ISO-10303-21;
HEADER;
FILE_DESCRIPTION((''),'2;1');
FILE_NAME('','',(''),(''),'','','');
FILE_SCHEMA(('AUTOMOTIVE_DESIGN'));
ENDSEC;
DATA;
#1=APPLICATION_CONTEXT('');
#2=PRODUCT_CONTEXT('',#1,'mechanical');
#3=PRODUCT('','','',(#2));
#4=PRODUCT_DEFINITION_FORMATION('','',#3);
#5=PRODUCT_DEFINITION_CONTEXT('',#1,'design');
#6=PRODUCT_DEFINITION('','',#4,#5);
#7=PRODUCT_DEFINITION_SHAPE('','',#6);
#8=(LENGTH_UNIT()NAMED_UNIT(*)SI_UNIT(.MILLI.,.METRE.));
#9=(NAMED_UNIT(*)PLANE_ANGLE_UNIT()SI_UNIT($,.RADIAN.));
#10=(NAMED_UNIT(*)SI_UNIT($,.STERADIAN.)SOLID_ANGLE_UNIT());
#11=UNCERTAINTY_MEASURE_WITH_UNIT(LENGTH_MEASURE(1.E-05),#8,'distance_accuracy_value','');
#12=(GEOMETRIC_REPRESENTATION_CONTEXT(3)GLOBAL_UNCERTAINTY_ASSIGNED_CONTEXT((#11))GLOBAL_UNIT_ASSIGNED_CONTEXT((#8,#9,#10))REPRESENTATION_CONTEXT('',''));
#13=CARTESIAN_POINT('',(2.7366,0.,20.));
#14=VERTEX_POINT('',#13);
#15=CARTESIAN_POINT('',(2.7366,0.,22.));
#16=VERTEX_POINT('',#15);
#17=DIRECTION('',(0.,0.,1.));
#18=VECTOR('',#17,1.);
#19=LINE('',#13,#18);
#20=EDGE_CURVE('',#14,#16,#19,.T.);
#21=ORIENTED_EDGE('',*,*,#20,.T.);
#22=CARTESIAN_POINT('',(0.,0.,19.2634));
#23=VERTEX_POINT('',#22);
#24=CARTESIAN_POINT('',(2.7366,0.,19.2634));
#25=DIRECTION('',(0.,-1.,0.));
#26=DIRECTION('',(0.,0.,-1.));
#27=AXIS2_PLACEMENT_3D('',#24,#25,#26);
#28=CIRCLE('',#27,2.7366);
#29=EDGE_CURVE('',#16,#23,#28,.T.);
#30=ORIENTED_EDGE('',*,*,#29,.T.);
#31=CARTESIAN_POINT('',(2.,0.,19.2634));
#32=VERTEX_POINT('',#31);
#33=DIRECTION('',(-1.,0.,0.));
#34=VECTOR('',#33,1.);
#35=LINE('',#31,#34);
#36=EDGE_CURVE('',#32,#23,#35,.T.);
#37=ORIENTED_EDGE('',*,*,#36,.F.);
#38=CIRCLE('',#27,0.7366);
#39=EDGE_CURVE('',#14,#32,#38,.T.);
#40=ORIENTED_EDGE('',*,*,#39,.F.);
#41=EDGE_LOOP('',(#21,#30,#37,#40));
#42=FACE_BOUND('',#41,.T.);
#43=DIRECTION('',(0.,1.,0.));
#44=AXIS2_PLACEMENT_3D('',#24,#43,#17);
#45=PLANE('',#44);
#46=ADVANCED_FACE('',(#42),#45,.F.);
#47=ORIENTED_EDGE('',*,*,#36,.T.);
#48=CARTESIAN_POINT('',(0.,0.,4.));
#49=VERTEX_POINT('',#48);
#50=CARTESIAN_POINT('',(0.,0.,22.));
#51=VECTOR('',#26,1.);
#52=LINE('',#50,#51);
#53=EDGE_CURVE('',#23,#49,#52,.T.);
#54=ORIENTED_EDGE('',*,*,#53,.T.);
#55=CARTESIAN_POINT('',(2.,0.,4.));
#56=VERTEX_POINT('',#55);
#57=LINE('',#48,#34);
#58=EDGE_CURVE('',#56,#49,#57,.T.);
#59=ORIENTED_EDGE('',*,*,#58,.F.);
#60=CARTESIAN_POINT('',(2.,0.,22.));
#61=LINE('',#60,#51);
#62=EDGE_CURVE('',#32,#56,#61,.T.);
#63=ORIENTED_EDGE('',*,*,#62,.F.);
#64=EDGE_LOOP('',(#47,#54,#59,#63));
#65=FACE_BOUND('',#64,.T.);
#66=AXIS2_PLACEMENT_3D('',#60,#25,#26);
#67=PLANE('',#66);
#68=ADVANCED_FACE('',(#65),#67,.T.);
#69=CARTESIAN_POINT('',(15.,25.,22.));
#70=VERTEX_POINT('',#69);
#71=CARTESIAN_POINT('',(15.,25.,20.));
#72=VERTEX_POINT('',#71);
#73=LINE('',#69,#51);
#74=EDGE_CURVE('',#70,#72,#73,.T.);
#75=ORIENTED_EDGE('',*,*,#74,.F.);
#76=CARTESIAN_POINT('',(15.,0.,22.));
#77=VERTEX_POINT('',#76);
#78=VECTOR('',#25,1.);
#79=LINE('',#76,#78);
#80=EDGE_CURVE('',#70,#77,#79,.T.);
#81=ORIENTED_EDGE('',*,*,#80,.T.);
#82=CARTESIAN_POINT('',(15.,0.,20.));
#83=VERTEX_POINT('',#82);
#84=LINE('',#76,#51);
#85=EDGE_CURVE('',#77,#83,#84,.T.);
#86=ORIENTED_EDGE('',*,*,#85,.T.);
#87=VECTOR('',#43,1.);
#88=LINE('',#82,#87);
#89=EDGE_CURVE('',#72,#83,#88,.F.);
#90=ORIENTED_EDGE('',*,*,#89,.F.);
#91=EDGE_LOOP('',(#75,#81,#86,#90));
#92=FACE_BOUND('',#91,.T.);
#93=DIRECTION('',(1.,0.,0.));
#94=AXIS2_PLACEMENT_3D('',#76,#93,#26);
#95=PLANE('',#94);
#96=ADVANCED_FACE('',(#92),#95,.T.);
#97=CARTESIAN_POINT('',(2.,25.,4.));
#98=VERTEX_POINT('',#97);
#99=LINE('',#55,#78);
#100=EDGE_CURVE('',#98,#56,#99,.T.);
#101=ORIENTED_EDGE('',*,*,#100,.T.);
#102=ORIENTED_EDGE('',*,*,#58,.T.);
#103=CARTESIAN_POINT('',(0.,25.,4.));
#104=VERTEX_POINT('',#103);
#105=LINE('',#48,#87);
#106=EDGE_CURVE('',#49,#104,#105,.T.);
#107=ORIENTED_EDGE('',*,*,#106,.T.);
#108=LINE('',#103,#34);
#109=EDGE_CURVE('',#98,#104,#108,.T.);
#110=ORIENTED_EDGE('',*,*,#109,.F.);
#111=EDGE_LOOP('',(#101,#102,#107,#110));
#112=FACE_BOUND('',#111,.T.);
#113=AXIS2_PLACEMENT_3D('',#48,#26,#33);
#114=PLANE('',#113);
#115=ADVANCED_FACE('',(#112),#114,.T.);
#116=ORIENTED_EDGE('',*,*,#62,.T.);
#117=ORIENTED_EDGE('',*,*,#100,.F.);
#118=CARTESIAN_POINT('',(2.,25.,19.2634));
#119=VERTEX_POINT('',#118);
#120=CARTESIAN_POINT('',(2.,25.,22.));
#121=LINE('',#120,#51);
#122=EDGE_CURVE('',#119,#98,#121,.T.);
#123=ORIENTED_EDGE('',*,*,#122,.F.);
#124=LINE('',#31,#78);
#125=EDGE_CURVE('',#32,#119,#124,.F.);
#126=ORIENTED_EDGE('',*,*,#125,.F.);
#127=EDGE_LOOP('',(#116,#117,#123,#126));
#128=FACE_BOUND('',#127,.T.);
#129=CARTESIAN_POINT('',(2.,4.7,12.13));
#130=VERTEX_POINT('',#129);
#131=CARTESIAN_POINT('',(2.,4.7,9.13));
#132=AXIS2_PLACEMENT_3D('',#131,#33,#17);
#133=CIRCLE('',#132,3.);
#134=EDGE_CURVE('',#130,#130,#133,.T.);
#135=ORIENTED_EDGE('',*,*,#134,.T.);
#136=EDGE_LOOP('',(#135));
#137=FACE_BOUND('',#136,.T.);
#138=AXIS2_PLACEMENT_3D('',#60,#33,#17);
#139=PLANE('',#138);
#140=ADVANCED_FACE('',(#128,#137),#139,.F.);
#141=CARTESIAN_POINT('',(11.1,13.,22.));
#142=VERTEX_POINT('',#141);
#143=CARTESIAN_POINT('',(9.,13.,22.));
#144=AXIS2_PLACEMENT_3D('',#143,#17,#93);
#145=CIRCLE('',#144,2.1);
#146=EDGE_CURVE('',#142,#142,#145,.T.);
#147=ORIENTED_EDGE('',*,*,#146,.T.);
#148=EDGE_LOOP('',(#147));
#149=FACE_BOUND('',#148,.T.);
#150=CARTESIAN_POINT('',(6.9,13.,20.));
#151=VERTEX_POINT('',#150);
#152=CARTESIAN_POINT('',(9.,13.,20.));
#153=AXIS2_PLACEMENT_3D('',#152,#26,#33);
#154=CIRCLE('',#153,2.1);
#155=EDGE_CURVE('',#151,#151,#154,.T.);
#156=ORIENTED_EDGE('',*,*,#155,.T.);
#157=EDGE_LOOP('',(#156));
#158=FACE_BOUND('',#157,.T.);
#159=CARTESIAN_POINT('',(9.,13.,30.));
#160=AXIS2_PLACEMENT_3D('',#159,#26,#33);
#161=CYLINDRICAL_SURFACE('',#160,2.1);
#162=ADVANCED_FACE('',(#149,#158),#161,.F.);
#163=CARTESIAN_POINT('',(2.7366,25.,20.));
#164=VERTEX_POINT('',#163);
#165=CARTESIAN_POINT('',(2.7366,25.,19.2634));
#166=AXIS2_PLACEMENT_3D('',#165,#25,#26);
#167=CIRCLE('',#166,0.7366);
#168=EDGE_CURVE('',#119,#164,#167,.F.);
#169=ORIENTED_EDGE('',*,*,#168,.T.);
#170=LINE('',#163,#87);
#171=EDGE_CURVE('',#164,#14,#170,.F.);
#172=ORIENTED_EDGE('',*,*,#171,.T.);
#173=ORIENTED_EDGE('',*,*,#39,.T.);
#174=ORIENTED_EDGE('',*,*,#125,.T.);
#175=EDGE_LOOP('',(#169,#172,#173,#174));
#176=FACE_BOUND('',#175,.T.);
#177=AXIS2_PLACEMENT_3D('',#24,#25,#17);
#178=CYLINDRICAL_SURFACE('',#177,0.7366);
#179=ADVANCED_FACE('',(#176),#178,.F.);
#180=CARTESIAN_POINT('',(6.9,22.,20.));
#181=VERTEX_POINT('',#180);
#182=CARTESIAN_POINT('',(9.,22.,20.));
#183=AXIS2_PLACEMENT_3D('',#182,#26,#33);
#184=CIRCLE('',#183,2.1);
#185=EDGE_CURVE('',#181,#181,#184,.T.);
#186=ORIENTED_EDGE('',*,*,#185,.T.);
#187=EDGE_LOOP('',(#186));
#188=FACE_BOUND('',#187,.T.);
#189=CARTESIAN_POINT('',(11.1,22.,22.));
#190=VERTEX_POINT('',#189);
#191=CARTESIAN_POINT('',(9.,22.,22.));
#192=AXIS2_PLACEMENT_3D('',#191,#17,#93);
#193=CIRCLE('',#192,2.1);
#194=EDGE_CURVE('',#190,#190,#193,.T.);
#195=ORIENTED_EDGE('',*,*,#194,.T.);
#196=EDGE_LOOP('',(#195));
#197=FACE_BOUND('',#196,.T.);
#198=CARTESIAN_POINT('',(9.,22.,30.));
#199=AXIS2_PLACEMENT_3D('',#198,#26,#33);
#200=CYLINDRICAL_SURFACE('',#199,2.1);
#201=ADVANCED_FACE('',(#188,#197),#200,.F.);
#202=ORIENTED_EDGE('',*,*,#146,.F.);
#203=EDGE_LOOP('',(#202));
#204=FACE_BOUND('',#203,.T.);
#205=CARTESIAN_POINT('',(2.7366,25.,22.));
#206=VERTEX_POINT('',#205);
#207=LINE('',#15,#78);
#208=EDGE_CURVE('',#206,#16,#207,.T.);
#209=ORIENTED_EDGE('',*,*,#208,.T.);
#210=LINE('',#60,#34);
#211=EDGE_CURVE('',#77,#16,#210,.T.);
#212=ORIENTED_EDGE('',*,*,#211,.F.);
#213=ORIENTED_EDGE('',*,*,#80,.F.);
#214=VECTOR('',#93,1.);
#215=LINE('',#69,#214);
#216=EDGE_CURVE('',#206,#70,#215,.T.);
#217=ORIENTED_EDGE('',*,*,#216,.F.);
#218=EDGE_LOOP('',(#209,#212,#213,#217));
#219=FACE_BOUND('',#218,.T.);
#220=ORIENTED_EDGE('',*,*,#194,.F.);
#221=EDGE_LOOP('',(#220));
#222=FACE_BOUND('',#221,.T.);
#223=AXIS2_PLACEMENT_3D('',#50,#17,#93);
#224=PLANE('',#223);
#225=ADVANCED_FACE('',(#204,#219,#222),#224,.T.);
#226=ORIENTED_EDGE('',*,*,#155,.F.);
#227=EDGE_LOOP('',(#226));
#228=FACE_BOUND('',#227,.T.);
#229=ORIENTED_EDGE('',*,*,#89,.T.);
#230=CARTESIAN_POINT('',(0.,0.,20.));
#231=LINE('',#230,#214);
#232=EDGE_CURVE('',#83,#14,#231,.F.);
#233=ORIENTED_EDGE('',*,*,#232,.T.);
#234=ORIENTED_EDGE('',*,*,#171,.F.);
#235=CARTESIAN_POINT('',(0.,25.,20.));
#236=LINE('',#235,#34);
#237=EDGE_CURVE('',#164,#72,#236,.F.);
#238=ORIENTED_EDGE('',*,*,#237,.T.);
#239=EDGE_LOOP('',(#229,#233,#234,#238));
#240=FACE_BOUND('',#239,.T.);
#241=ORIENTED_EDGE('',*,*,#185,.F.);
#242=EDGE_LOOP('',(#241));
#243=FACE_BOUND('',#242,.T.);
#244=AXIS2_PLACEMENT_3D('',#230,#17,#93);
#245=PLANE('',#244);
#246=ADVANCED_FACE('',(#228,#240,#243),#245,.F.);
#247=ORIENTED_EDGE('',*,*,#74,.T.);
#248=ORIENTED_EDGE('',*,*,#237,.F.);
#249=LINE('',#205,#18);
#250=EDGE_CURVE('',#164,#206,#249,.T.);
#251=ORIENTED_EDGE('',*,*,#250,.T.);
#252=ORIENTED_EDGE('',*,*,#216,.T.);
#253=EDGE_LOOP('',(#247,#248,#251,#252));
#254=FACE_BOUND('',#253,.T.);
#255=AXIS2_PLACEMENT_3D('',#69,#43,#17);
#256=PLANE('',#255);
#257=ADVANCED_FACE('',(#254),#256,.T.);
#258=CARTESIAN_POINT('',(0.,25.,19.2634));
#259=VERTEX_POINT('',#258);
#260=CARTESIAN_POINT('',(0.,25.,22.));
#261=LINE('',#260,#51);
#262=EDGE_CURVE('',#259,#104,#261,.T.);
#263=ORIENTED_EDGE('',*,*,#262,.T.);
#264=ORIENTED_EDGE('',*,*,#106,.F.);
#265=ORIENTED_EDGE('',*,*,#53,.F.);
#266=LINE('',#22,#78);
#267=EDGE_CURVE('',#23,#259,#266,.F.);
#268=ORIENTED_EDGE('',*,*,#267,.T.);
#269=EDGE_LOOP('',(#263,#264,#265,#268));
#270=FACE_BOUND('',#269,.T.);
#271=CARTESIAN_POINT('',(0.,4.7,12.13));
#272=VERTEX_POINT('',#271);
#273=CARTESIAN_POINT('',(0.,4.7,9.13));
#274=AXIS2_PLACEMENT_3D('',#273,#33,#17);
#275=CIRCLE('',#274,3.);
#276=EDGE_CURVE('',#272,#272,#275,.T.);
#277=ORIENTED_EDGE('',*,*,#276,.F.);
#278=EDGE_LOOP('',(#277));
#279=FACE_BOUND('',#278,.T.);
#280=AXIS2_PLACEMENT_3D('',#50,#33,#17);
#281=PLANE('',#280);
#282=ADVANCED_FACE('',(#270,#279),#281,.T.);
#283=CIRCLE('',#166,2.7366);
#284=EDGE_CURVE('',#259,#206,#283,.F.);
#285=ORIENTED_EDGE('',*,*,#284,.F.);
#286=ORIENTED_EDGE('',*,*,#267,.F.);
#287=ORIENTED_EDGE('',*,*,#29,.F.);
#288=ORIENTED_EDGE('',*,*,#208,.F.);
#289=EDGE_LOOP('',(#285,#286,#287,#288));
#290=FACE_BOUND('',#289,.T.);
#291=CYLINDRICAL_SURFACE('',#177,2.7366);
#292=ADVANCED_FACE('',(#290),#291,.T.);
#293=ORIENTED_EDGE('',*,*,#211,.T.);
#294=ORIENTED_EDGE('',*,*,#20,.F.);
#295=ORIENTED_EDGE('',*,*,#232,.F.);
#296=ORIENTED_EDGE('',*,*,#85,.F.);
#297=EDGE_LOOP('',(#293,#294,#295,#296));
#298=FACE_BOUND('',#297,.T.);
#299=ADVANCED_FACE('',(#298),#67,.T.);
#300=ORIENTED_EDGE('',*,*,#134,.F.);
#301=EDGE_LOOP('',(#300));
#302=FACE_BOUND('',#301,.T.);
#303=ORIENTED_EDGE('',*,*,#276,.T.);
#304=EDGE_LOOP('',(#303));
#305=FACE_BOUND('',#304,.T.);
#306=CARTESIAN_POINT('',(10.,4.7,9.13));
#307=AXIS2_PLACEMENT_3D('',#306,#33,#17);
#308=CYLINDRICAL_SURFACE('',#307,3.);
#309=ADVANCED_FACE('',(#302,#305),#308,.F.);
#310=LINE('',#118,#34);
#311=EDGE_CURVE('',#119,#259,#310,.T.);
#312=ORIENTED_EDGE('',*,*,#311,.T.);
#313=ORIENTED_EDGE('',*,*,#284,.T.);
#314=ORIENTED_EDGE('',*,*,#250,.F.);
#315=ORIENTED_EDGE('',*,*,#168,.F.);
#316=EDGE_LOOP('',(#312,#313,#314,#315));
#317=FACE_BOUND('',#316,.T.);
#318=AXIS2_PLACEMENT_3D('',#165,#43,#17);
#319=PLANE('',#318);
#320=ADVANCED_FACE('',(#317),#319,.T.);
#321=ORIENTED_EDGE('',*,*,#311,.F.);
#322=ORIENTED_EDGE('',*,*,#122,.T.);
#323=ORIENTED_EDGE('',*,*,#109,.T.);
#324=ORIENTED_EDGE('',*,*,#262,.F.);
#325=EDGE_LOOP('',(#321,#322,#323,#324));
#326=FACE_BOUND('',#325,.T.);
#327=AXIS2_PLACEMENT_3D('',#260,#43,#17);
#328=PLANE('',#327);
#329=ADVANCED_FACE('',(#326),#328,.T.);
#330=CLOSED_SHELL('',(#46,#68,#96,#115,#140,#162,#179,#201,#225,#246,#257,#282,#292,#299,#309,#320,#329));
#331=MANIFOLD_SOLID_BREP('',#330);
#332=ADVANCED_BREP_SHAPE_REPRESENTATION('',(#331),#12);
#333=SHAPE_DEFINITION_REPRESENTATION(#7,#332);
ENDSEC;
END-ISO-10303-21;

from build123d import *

# Parameters (mm, degrees)
SKETCH_1_W                       = 2
SKETCH_1_H                       = 25
SM_BASE_FLANGE_1_DEPTH           = 22
SM_EDGE_FLANGE_2_STRIP_W         = 9.4732
SM_EDGE_FLANGE_2_STRIP_H         = 2
SM_EDGE_FLANGE_2_STRIP_CUT_DEPTH = 25
SM_EDGE_FLANGE_2_DEPTH           = 25
SKETCH_12_R                      = 3
CUT_EXTRUDE_2_DEPTH              = 10
SKETCH_13_R                      = 2.1
CUT_EXTRUDE_3_DEPTH              = 10
SKETCH_14_W                      = 3.568083007
SKETCH_14_H                      = 26.91386829
CUT_EXTRUDE_4_DEPTH              = 4


# Sheet-metal steps are written as plain solids
with BuildPart() as part:
    # Sketch 1 → 基体-法兰1 (new body)
    with BuildSketch(Plane.XY):
        with Locations((1, 12.5)):
            Rectangle(SKETCH_1_W, SKETCH_1_H)
    extrude(amount=SM_BASE_FLANGE_1_DEPTH)

    # 边线-法兰2 strip (across the edge) → 边线-法兰2 strip cut (cut)
    with BuildSketch(Plane(origin=(2, 25, 22), x_dir=(0, 0, -1), z_dir=(0, -1, 0))):
        with Locations((-2, -1)):
            Rectangle(SM_EDGE_FLANGE_2_STRIP_W, SM_EDGE_FLANGE_2_STRIP_H)
    extrude(amount=SM_EDGE_FLANGE_2_STRIP_CUT_DEPTH, mode=Mode.SUBTRACT)

    # 边线-法兰2 section (across the edge) → 边线-法兰2 (add)
    with BuildSketch(Plane(origin=(2, 25, 22), x_dir=(0, 0, -1), z_dir=(0, -1, 0))):
        with BuildLine():
            Line((0, 0.7366), (0, 13))
            Line((0, 13), (2, 13))
            Line((2, 13), (2, 0.7366))
            ThreePointArc((2, 0.7366), (2.215745145, 0.215745145), (2.7366, 0))
            Line((2.7366, 0), (2.7366, -2))
            ThreePointArc((2.7366, -2), (0.801531583, -1.198468417), (0, 0.7366))
        make_face()
    extrude(amount=SM_EDGE_FLANGE_2_DEPTH)

    # 草图12 → 切除-拉伸2 (cut)
    with BuildSketch(Plane.ZY):
        with Locations((9.13, 4.7)):
            Circle(SKETCH_12_R)
    extrude(amount=-CUT_EXTRUDE_2_DEPTH, mode=Mode.SUBTRACT)

    # 草图13 → 切除-拉伸3 (cut)
    with BuildSketch(Plane(origin=(0, 0, 20), x_dir=(-1, 0, 0), z_dir=(0, 0, -1))):
        with Locations((-9, 13)):
            Circle(SKETCH_13_R)
        with Locations((-9, 22)):
            Circle(SKETCH_13_R)
    extrude(amount=-CUT_EXTRUDE_3_DEPTH, mode=Mode.SUBTRACT)

    # 草图14 → 切除-拉伸4 (cut)
    with BuildSketch(Plane(origin=(0, 0, 0), x_dir=(-1, 0, 0), z_dir=(0, 0, -1))):
        with Locations((-1.784041504, 13.456934145)):
            Rectangle(SKETCH_14_W, SKETCH_14_H)
    extrude(amount=-CUT_EXTRUDE_4_DEPTH, mode=Mode.SUBTRACT)


solid = part.part
